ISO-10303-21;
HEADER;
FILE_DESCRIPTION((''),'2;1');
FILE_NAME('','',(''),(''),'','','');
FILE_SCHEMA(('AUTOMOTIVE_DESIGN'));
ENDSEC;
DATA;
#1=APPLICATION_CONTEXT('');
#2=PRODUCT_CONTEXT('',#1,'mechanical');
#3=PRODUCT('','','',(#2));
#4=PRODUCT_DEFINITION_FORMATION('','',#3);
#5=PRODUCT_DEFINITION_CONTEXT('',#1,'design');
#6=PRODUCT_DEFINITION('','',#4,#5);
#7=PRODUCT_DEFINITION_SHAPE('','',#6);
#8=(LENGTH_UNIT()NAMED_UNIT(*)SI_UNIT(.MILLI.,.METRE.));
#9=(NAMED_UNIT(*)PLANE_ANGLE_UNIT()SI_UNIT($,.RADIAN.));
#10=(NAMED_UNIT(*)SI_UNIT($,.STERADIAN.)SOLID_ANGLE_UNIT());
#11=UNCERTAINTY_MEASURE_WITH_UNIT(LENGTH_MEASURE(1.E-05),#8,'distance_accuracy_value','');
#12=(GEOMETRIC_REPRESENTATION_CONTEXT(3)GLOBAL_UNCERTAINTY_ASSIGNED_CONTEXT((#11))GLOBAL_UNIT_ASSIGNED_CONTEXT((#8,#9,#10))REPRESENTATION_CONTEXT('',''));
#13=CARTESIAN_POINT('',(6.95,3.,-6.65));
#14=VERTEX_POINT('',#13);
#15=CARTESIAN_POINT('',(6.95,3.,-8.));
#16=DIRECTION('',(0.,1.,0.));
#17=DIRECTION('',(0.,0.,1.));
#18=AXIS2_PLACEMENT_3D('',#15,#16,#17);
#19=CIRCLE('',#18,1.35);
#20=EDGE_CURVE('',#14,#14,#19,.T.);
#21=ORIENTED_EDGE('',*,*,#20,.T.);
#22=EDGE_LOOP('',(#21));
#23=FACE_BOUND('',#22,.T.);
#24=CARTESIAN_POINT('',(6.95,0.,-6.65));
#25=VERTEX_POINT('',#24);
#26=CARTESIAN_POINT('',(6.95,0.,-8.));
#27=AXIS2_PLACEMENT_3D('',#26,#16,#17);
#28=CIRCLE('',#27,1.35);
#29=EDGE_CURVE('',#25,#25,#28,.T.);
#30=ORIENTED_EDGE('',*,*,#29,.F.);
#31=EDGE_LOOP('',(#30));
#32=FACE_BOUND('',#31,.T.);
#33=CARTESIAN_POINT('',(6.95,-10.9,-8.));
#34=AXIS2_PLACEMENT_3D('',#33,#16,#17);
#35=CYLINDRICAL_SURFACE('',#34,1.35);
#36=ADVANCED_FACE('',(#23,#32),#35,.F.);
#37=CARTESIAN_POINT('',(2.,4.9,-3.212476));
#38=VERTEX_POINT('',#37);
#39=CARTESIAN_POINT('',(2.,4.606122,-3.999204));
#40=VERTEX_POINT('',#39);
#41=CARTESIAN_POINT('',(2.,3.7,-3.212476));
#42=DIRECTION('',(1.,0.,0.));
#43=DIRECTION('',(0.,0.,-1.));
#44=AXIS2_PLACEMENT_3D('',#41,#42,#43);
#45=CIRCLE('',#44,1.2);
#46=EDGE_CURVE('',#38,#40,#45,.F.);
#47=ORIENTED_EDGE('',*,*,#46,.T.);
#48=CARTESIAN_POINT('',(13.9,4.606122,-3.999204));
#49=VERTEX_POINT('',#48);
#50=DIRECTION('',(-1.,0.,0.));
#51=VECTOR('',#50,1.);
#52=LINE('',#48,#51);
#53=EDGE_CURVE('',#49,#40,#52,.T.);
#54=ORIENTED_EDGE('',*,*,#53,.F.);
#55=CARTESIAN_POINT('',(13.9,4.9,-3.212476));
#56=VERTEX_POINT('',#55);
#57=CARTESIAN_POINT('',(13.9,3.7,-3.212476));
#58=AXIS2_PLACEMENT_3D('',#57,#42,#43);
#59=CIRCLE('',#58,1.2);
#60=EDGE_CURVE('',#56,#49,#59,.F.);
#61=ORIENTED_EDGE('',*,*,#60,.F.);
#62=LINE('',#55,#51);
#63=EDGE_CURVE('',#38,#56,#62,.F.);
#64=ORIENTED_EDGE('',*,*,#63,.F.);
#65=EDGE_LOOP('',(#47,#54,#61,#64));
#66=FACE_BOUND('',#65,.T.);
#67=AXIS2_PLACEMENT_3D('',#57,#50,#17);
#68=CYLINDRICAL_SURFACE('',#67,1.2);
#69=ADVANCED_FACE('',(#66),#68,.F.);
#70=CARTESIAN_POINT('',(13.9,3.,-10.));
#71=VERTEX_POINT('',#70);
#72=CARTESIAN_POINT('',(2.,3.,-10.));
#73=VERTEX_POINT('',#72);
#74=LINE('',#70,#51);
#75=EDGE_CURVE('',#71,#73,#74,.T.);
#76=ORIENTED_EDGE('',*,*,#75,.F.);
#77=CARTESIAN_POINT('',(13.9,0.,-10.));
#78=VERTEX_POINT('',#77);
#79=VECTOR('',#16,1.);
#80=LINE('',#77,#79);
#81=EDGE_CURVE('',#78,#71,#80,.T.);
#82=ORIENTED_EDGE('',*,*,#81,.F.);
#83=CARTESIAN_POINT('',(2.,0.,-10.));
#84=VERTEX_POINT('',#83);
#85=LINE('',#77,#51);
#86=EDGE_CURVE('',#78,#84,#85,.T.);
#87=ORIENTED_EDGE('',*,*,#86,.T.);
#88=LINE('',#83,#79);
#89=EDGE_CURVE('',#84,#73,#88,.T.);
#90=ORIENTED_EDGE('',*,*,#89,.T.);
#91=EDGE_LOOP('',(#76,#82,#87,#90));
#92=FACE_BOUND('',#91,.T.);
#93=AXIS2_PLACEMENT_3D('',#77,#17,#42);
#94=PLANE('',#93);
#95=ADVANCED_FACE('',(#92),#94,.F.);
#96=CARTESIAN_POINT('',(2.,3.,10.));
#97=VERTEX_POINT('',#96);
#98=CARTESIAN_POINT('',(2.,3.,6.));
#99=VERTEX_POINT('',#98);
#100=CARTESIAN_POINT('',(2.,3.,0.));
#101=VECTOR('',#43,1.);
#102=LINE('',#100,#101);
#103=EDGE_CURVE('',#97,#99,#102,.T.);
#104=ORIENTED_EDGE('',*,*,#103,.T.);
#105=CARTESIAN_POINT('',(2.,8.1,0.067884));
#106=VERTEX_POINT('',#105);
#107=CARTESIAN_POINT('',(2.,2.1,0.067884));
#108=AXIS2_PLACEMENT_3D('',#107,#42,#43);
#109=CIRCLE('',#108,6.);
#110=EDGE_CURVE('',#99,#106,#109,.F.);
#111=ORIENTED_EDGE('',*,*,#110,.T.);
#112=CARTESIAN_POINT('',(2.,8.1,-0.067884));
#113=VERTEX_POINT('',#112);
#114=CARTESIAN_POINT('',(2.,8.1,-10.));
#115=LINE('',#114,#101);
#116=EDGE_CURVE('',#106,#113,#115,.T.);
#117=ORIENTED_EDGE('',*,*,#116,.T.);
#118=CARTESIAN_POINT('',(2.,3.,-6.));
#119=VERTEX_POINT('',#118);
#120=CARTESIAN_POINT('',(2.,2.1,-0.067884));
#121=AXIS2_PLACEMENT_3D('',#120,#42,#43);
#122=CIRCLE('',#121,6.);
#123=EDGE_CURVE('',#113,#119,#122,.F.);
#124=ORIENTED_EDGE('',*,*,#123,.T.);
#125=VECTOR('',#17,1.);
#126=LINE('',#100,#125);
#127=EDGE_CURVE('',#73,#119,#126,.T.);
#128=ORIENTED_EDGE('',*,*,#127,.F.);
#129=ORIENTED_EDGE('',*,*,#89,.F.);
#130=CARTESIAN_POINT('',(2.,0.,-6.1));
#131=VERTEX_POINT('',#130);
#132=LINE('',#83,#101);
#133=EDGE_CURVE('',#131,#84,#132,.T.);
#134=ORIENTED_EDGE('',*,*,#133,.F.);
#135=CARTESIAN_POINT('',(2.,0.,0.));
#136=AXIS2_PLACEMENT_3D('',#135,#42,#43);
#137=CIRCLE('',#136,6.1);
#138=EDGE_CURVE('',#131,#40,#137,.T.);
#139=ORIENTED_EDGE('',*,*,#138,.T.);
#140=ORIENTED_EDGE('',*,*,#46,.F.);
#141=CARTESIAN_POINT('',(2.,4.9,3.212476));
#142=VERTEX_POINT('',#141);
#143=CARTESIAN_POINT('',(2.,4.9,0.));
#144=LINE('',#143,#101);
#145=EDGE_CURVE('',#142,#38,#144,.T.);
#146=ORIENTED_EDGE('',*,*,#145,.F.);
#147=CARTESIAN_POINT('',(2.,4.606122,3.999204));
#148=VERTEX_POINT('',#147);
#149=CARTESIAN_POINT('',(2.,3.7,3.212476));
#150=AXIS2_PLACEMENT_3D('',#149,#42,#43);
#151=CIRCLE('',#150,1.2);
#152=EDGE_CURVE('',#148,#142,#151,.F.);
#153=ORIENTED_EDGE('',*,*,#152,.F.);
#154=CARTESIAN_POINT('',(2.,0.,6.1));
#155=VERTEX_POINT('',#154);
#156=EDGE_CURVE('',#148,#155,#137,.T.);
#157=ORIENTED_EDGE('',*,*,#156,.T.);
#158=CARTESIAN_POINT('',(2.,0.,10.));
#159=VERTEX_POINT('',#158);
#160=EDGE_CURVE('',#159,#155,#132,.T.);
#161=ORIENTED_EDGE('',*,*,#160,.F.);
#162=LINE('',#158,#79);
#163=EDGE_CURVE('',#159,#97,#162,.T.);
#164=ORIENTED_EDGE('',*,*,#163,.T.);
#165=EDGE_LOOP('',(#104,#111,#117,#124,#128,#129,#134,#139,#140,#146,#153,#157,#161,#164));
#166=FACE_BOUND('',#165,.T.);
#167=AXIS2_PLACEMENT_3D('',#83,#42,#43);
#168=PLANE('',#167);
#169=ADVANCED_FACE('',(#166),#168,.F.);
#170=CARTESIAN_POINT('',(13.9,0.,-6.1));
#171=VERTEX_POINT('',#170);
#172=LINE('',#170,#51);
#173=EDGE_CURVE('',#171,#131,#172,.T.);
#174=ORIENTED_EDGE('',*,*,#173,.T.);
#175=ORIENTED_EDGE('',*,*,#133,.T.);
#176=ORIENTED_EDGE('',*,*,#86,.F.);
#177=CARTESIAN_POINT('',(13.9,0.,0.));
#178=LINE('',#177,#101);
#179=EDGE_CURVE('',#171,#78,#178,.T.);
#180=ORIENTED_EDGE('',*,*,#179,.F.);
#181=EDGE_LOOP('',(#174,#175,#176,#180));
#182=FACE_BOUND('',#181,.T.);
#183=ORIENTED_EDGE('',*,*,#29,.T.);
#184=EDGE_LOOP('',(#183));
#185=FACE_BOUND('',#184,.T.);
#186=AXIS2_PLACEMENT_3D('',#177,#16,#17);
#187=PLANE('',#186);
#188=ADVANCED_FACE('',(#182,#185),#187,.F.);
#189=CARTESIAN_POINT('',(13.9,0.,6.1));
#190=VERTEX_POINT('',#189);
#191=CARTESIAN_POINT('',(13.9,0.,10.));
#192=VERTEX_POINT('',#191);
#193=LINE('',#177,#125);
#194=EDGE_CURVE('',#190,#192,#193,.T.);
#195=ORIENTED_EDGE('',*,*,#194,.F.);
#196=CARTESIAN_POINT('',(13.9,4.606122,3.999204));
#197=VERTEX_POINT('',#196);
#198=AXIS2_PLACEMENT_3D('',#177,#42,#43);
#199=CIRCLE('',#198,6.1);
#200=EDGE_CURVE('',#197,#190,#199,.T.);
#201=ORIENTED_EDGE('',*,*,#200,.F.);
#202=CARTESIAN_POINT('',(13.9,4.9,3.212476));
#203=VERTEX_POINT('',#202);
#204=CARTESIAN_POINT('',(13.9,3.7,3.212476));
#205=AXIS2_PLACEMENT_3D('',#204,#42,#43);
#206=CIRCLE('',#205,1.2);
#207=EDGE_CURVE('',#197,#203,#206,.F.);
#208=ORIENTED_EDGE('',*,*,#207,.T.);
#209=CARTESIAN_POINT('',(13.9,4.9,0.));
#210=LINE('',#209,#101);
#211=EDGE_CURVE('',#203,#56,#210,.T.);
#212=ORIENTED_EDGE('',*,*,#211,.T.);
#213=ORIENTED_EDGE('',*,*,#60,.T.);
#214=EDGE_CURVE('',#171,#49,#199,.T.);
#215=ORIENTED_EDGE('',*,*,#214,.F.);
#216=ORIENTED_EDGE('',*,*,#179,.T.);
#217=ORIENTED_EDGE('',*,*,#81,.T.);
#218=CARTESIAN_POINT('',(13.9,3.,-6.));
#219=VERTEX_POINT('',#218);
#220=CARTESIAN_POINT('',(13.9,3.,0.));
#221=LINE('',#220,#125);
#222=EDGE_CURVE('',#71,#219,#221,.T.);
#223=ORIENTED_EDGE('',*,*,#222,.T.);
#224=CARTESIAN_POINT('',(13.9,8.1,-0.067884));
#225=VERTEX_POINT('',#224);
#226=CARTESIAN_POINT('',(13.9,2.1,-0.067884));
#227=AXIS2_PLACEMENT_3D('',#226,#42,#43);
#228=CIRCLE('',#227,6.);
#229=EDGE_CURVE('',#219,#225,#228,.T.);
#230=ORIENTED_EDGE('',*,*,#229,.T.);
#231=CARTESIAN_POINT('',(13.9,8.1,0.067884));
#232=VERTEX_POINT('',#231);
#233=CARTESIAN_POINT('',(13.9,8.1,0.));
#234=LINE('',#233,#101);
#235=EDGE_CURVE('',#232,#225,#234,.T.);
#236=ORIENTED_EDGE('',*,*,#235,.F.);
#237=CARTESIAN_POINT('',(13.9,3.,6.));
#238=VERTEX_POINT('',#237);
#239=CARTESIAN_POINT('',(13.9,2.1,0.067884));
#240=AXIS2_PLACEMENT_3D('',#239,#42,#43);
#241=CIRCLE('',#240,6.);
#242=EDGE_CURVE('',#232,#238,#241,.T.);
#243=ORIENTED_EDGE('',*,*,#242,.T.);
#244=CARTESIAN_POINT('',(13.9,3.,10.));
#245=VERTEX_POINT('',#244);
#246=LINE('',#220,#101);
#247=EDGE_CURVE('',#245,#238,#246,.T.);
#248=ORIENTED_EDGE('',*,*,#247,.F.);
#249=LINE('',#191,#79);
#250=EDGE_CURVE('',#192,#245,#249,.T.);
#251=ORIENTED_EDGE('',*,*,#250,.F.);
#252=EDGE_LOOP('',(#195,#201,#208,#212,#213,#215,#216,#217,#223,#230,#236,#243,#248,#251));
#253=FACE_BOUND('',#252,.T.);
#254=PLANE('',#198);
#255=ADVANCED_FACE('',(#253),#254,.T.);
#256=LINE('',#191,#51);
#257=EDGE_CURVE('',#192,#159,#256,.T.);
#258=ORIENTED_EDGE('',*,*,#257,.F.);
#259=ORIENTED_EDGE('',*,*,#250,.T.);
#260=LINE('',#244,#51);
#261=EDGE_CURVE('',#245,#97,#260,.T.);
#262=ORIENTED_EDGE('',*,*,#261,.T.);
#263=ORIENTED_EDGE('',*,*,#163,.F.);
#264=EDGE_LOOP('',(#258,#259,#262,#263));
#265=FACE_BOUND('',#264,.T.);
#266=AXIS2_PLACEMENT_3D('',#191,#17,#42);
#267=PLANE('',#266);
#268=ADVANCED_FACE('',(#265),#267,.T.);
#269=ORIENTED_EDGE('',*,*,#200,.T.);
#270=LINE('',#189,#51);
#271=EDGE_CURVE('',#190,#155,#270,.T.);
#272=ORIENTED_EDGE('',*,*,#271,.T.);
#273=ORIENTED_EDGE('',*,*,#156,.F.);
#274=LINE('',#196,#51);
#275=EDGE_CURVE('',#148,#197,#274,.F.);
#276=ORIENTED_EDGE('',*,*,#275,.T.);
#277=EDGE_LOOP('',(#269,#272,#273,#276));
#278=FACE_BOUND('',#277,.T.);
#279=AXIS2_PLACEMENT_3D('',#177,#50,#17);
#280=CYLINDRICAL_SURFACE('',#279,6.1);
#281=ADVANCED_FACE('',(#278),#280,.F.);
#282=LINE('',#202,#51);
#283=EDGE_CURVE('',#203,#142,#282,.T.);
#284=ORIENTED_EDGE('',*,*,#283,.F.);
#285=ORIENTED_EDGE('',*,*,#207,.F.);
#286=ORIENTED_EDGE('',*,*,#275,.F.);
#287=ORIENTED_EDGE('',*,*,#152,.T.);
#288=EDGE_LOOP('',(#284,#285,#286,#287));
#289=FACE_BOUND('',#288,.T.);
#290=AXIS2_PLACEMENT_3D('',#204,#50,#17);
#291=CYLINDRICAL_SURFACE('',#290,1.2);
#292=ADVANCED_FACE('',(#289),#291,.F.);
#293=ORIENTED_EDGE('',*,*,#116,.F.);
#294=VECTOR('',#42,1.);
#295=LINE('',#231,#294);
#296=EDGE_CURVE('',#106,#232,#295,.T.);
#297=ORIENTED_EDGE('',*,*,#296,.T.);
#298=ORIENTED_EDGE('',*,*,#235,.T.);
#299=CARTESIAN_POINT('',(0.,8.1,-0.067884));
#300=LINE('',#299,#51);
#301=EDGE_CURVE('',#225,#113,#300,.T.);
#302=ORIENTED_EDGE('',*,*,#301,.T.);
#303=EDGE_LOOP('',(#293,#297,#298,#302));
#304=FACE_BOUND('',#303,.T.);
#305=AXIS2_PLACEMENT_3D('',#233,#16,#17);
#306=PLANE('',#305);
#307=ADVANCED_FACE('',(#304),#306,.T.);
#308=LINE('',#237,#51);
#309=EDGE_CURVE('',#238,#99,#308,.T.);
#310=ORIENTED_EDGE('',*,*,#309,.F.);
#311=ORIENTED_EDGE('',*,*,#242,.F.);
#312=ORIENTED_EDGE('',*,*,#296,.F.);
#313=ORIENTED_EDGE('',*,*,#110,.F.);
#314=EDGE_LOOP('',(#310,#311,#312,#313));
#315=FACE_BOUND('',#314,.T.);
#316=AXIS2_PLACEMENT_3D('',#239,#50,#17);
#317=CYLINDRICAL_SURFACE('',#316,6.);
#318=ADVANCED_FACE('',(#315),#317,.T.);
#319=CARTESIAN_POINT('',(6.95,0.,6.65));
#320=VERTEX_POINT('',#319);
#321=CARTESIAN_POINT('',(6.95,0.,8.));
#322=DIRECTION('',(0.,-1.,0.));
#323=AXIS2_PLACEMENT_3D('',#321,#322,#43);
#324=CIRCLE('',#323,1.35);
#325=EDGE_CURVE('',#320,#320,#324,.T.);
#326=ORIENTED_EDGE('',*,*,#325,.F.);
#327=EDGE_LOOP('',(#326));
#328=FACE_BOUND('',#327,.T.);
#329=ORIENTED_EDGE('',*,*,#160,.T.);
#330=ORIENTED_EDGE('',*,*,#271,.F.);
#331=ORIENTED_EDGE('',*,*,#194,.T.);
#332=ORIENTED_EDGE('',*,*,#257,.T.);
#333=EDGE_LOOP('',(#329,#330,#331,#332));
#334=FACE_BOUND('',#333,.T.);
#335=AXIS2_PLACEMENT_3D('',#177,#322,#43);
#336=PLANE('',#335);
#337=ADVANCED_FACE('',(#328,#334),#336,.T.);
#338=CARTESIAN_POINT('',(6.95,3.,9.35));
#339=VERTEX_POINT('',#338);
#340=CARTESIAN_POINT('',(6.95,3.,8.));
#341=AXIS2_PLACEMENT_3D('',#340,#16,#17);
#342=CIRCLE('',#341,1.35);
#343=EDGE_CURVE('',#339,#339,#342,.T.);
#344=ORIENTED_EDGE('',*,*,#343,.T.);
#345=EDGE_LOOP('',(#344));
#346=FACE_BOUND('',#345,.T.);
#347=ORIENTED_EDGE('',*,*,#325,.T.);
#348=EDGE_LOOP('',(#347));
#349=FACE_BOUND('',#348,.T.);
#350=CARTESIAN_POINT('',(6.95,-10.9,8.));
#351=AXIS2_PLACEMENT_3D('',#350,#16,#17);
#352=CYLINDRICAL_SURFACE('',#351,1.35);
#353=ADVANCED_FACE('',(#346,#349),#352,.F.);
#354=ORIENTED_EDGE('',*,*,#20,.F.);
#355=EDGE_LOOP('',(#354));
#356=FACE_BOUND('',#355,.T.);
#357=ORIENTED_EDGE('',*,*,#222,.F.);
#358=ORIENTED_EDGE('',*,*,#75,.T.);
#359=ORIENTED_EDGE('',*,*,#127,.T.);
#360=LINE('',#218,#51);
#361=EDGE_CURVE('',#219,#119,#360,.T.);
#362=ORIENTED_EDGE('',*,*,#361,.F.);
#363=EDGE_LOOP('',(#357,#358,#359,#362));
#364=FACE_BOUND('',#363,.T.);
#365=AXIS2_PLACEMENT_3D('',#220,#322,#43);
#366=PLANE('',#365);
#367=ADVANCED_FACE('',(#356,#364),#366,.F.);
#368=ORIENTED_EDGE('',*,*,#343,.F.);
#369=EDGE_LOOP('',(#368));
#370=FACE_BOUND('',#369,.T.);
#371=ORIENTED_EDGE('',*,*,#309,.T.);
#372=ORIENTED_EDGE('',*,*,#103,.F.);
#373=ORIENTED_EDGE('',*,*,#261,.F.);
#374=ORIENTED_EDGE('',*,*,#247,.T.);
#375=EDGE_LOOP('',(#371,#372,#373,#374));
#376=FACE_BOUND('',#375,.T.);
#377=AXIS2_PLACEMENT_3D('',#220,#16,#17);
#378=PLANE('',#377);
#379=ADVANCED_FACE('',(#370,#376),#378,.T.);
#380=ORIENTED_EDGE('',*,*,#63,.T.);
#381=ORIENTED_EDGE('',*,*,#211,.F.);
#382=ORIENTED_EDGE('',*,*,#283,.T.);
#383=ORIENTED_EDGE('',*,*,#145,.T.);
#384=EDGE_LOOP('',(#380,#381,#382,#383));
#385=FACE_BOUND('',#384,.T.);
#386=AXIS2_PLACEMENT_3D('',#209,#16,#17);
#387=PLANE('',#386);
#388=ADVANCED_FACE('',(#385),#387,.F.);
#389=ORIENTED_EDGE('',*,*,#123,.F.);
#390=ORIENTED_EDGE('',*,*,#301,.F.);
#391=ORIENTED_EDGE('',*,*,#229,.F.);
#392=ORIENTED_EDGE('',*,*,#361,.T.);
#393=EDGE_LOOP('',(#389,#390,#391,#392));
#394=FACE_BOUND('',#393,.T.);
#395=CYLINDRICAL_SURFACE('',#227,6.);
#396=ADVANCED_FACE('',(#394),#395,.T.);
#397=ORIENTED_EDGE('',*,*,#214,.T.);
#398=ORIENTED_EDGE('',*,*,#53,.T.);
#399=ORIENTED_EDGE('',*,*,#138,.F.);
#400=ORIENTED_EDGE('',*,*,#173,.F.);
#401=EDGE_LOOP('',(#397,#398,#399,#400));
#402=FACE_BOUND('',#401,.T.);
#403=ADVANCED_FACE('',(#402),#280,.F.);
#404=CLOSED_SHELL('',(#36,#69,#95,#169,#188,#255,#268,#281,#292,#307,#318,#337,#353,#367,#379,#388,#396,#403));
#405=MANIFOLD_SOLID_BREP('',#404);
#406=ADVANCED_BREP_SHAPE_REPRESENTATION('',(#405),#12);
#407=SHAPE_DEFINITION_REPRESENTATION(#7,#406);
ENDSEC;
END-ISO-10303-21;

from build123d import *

# Parameters (mm, degrees)
RESSALTO_EXTRUS_O1_DEPTH   = 13.9
FILETE1_R                  = 6
CORTE_EXTRUS_O1_DEPTH      = 13.9
FILETE2_R                  = 1.2
CORTE_EXTRUS_O2_DEPTH      = 18.866728856
CORTE_EXTRUS_O2_DEPTH_BACK = 18.866728856
ESBO_O3_W                  = 2
ESBO_O3_H                  = 20.053518914


with BuildPart() as part:
    # Esboço1 → Ressalto-extrusão1 (new body)
    with BuildSketch(Plane(origin=(0, 0, 0), x_dir=(0, 0, -1), z_dir=(1, 0, 0))):
        with BuildLine():
            ThreePointArc((-3.633180425, 4.9), (-1.913112647, 5.792236183), (0, 6.1))
            ThreePointArc((0, 6.1), (1.913112647, 5.792236183), (3.633180425, 4.9))
            ThreePointArc((3.633180425, 4.9), (5.448504409, 2.742954557), (6.1, 0))
            Line((6.1, 0), (10, 0))
            Line((10, 0), (10, 3))
            Line((10, 3), (6, 3))
            Line((6, 3), (6, 8.1))
            Line((6, 8.1), (-6, 8.1))
            Line((-6, 8.1), (-6, 3))
            Line((-6, 3), (-10, 3))
            Line((-10, 3), (-10, 0))
            Line((-10, 0), (-6.1, 0))
            ThreePointArc((-6.1, 0), (-5.448504409, 2.742954557), (-3.633180425, 4.9))
        make_face()
        with BuildLine():
            ThreePointArc((3.633180425, 4.9), (1.913112647, 5.792236183), (0, 6.1))
            Line((0, 6.1), (0, 4.9))
            Line((0, 4.9), (3.633180425, 4.9))
        make_face()
        with BuildLine():
            Line((0, 4.9), (0, 6.1))
            ThreePointArc((0, 6.1), (-1.913112647, 5.792236183), (-3.633180425, 4.9))
            Line((-3.633180425, 4.9), (0, 4.9))
        make_face()
    extrude(amount=RESSALTO_EXTRUS_O1_DEPTH)

    # Filete1
    # the kernel refuses this fillet: 6 mm, written as the material it takes off along each edge
    with BuildSketch(Plane(origin=(-14.83028995, 8.1, 6), x_dir=(0, -1, 0), z_dir=(1, 0, 0))) as filete1_piece_1:
        with BuildLine():
            CenterArc((6, 5.93211598), FILETE1_R, 180, 81.373073441)
            Line((0, 5.93211598), (-0.12, 5.93211598))
            Line((-0.12, 5.93211598), (-0.12, 0))
            Line((-0.12, 0), (0, -0.12))
            ThreePointArc((0, -0.12), (2.55, -0.12), (5.082, -0.11864232))
            Line((5.082, -0.11864232), (5.1, 0))
        make_face()
    extrude(amount=43.5605799, mode=Mode.SUBTRACT)
    with BuildSketch(Plane(origin=(-14.83028995, 8.1, -6), x_dir=(0, -1, 0), z_dir=(1, 0, 0))) as filete1_piece_2:
        with BuildLine():
            CenterArc((6, -5.93211598), FILETE1_R, 98.626926559, 81.373073441)
            Line((0, -5.93211598), (-0.12, -5.93211598))
            Line((-0.12, -5.93211598), (-0.12, 0))
            Line((-0.12, 0), (0, 0.12))
            ThreePointArc((0, 0.12), (2.55, 0.12), (5.082, 0.11864232))
            Line((5.082, 0.11864232), (5.1, 0))
        make_face()
    extrude(amount=43.5605799, mode=Mode.SUBTRACT)

    # Esboço2 → Corte-extrusão1 (cut)
    with BuildSketch(Plane(origin=(0, 3, 0), x_dir=(1, 0, 0), z_dir=(0, 1, 0))):
        with BuildLine():
            ThreePointArc((6.95, 9.35), (5.6, 8), (6.95, 6.65))
            Line((6.95, 6.65), (6.95, 9.35))
        make_face()
        with BuildLine():
            Line((6.95, 9.35), (6.95, 6.65))
            ThreePointArc((6.95, 6.65), (7.904594155, 7.045405845), (8.3, 8))
            ThreePointArc((8.3, 8), (7.904594155, 8.954594155), (6.95, 9.35))
        make_face()
        with BuildLine():
            ThreePointArc((8.3, -8), (7.904594155, -7.045405845), (6.95, -6.65))
            Line((6.95, -6.65), (6.95, -9.35))
            ThreePointArc((6.95, -9.35), (7.904594155, -8.954594155), (8.3, -8))
        make_face()
        with BuildLine():
            Line((6.95, -9.35), (6.95, -6.65))
            ThreePointArc((6.95, -6.65), (5.6, -8), (6.95, -9.35))
        make_face()
    extrude(amount=-CORTE_EXTRUS_O1_DEPTH, mode=Mode.SUBTRACT)

    # Filete2
    filete2_edges = [part.edges().sort_by_distance(p)[0] for p in [
        (6.95, 4.9, -3.633180425),
        (6.95, 4.9, 3.633180425),
    ]]
    fillet(filete2_edges, radius=FILETE2_R)

    # Esboço3 → Corte-extrusão2 (cut, two sides: drawn at the far end of the back side and taken through both)
    with BuildSketch(Plane(origin=(0, 3, 0), x_dir=(1, 0, 0), z_dir=(0, 1, 0)).offset(-CORTE_EXTRUS_O2_DEPTH_BACK)):
        with Locations((1, -0.026759457)):
            Rectangle(ESBO_O3_W, ESBO_O3_H)
    extrude(amount=CORTE_EXTRUS_O2_DEPTH + CORTE_EXTRUS_O2_DEPTH_BACK, mode=Mode.SUBTRACT)


solid = part.part
